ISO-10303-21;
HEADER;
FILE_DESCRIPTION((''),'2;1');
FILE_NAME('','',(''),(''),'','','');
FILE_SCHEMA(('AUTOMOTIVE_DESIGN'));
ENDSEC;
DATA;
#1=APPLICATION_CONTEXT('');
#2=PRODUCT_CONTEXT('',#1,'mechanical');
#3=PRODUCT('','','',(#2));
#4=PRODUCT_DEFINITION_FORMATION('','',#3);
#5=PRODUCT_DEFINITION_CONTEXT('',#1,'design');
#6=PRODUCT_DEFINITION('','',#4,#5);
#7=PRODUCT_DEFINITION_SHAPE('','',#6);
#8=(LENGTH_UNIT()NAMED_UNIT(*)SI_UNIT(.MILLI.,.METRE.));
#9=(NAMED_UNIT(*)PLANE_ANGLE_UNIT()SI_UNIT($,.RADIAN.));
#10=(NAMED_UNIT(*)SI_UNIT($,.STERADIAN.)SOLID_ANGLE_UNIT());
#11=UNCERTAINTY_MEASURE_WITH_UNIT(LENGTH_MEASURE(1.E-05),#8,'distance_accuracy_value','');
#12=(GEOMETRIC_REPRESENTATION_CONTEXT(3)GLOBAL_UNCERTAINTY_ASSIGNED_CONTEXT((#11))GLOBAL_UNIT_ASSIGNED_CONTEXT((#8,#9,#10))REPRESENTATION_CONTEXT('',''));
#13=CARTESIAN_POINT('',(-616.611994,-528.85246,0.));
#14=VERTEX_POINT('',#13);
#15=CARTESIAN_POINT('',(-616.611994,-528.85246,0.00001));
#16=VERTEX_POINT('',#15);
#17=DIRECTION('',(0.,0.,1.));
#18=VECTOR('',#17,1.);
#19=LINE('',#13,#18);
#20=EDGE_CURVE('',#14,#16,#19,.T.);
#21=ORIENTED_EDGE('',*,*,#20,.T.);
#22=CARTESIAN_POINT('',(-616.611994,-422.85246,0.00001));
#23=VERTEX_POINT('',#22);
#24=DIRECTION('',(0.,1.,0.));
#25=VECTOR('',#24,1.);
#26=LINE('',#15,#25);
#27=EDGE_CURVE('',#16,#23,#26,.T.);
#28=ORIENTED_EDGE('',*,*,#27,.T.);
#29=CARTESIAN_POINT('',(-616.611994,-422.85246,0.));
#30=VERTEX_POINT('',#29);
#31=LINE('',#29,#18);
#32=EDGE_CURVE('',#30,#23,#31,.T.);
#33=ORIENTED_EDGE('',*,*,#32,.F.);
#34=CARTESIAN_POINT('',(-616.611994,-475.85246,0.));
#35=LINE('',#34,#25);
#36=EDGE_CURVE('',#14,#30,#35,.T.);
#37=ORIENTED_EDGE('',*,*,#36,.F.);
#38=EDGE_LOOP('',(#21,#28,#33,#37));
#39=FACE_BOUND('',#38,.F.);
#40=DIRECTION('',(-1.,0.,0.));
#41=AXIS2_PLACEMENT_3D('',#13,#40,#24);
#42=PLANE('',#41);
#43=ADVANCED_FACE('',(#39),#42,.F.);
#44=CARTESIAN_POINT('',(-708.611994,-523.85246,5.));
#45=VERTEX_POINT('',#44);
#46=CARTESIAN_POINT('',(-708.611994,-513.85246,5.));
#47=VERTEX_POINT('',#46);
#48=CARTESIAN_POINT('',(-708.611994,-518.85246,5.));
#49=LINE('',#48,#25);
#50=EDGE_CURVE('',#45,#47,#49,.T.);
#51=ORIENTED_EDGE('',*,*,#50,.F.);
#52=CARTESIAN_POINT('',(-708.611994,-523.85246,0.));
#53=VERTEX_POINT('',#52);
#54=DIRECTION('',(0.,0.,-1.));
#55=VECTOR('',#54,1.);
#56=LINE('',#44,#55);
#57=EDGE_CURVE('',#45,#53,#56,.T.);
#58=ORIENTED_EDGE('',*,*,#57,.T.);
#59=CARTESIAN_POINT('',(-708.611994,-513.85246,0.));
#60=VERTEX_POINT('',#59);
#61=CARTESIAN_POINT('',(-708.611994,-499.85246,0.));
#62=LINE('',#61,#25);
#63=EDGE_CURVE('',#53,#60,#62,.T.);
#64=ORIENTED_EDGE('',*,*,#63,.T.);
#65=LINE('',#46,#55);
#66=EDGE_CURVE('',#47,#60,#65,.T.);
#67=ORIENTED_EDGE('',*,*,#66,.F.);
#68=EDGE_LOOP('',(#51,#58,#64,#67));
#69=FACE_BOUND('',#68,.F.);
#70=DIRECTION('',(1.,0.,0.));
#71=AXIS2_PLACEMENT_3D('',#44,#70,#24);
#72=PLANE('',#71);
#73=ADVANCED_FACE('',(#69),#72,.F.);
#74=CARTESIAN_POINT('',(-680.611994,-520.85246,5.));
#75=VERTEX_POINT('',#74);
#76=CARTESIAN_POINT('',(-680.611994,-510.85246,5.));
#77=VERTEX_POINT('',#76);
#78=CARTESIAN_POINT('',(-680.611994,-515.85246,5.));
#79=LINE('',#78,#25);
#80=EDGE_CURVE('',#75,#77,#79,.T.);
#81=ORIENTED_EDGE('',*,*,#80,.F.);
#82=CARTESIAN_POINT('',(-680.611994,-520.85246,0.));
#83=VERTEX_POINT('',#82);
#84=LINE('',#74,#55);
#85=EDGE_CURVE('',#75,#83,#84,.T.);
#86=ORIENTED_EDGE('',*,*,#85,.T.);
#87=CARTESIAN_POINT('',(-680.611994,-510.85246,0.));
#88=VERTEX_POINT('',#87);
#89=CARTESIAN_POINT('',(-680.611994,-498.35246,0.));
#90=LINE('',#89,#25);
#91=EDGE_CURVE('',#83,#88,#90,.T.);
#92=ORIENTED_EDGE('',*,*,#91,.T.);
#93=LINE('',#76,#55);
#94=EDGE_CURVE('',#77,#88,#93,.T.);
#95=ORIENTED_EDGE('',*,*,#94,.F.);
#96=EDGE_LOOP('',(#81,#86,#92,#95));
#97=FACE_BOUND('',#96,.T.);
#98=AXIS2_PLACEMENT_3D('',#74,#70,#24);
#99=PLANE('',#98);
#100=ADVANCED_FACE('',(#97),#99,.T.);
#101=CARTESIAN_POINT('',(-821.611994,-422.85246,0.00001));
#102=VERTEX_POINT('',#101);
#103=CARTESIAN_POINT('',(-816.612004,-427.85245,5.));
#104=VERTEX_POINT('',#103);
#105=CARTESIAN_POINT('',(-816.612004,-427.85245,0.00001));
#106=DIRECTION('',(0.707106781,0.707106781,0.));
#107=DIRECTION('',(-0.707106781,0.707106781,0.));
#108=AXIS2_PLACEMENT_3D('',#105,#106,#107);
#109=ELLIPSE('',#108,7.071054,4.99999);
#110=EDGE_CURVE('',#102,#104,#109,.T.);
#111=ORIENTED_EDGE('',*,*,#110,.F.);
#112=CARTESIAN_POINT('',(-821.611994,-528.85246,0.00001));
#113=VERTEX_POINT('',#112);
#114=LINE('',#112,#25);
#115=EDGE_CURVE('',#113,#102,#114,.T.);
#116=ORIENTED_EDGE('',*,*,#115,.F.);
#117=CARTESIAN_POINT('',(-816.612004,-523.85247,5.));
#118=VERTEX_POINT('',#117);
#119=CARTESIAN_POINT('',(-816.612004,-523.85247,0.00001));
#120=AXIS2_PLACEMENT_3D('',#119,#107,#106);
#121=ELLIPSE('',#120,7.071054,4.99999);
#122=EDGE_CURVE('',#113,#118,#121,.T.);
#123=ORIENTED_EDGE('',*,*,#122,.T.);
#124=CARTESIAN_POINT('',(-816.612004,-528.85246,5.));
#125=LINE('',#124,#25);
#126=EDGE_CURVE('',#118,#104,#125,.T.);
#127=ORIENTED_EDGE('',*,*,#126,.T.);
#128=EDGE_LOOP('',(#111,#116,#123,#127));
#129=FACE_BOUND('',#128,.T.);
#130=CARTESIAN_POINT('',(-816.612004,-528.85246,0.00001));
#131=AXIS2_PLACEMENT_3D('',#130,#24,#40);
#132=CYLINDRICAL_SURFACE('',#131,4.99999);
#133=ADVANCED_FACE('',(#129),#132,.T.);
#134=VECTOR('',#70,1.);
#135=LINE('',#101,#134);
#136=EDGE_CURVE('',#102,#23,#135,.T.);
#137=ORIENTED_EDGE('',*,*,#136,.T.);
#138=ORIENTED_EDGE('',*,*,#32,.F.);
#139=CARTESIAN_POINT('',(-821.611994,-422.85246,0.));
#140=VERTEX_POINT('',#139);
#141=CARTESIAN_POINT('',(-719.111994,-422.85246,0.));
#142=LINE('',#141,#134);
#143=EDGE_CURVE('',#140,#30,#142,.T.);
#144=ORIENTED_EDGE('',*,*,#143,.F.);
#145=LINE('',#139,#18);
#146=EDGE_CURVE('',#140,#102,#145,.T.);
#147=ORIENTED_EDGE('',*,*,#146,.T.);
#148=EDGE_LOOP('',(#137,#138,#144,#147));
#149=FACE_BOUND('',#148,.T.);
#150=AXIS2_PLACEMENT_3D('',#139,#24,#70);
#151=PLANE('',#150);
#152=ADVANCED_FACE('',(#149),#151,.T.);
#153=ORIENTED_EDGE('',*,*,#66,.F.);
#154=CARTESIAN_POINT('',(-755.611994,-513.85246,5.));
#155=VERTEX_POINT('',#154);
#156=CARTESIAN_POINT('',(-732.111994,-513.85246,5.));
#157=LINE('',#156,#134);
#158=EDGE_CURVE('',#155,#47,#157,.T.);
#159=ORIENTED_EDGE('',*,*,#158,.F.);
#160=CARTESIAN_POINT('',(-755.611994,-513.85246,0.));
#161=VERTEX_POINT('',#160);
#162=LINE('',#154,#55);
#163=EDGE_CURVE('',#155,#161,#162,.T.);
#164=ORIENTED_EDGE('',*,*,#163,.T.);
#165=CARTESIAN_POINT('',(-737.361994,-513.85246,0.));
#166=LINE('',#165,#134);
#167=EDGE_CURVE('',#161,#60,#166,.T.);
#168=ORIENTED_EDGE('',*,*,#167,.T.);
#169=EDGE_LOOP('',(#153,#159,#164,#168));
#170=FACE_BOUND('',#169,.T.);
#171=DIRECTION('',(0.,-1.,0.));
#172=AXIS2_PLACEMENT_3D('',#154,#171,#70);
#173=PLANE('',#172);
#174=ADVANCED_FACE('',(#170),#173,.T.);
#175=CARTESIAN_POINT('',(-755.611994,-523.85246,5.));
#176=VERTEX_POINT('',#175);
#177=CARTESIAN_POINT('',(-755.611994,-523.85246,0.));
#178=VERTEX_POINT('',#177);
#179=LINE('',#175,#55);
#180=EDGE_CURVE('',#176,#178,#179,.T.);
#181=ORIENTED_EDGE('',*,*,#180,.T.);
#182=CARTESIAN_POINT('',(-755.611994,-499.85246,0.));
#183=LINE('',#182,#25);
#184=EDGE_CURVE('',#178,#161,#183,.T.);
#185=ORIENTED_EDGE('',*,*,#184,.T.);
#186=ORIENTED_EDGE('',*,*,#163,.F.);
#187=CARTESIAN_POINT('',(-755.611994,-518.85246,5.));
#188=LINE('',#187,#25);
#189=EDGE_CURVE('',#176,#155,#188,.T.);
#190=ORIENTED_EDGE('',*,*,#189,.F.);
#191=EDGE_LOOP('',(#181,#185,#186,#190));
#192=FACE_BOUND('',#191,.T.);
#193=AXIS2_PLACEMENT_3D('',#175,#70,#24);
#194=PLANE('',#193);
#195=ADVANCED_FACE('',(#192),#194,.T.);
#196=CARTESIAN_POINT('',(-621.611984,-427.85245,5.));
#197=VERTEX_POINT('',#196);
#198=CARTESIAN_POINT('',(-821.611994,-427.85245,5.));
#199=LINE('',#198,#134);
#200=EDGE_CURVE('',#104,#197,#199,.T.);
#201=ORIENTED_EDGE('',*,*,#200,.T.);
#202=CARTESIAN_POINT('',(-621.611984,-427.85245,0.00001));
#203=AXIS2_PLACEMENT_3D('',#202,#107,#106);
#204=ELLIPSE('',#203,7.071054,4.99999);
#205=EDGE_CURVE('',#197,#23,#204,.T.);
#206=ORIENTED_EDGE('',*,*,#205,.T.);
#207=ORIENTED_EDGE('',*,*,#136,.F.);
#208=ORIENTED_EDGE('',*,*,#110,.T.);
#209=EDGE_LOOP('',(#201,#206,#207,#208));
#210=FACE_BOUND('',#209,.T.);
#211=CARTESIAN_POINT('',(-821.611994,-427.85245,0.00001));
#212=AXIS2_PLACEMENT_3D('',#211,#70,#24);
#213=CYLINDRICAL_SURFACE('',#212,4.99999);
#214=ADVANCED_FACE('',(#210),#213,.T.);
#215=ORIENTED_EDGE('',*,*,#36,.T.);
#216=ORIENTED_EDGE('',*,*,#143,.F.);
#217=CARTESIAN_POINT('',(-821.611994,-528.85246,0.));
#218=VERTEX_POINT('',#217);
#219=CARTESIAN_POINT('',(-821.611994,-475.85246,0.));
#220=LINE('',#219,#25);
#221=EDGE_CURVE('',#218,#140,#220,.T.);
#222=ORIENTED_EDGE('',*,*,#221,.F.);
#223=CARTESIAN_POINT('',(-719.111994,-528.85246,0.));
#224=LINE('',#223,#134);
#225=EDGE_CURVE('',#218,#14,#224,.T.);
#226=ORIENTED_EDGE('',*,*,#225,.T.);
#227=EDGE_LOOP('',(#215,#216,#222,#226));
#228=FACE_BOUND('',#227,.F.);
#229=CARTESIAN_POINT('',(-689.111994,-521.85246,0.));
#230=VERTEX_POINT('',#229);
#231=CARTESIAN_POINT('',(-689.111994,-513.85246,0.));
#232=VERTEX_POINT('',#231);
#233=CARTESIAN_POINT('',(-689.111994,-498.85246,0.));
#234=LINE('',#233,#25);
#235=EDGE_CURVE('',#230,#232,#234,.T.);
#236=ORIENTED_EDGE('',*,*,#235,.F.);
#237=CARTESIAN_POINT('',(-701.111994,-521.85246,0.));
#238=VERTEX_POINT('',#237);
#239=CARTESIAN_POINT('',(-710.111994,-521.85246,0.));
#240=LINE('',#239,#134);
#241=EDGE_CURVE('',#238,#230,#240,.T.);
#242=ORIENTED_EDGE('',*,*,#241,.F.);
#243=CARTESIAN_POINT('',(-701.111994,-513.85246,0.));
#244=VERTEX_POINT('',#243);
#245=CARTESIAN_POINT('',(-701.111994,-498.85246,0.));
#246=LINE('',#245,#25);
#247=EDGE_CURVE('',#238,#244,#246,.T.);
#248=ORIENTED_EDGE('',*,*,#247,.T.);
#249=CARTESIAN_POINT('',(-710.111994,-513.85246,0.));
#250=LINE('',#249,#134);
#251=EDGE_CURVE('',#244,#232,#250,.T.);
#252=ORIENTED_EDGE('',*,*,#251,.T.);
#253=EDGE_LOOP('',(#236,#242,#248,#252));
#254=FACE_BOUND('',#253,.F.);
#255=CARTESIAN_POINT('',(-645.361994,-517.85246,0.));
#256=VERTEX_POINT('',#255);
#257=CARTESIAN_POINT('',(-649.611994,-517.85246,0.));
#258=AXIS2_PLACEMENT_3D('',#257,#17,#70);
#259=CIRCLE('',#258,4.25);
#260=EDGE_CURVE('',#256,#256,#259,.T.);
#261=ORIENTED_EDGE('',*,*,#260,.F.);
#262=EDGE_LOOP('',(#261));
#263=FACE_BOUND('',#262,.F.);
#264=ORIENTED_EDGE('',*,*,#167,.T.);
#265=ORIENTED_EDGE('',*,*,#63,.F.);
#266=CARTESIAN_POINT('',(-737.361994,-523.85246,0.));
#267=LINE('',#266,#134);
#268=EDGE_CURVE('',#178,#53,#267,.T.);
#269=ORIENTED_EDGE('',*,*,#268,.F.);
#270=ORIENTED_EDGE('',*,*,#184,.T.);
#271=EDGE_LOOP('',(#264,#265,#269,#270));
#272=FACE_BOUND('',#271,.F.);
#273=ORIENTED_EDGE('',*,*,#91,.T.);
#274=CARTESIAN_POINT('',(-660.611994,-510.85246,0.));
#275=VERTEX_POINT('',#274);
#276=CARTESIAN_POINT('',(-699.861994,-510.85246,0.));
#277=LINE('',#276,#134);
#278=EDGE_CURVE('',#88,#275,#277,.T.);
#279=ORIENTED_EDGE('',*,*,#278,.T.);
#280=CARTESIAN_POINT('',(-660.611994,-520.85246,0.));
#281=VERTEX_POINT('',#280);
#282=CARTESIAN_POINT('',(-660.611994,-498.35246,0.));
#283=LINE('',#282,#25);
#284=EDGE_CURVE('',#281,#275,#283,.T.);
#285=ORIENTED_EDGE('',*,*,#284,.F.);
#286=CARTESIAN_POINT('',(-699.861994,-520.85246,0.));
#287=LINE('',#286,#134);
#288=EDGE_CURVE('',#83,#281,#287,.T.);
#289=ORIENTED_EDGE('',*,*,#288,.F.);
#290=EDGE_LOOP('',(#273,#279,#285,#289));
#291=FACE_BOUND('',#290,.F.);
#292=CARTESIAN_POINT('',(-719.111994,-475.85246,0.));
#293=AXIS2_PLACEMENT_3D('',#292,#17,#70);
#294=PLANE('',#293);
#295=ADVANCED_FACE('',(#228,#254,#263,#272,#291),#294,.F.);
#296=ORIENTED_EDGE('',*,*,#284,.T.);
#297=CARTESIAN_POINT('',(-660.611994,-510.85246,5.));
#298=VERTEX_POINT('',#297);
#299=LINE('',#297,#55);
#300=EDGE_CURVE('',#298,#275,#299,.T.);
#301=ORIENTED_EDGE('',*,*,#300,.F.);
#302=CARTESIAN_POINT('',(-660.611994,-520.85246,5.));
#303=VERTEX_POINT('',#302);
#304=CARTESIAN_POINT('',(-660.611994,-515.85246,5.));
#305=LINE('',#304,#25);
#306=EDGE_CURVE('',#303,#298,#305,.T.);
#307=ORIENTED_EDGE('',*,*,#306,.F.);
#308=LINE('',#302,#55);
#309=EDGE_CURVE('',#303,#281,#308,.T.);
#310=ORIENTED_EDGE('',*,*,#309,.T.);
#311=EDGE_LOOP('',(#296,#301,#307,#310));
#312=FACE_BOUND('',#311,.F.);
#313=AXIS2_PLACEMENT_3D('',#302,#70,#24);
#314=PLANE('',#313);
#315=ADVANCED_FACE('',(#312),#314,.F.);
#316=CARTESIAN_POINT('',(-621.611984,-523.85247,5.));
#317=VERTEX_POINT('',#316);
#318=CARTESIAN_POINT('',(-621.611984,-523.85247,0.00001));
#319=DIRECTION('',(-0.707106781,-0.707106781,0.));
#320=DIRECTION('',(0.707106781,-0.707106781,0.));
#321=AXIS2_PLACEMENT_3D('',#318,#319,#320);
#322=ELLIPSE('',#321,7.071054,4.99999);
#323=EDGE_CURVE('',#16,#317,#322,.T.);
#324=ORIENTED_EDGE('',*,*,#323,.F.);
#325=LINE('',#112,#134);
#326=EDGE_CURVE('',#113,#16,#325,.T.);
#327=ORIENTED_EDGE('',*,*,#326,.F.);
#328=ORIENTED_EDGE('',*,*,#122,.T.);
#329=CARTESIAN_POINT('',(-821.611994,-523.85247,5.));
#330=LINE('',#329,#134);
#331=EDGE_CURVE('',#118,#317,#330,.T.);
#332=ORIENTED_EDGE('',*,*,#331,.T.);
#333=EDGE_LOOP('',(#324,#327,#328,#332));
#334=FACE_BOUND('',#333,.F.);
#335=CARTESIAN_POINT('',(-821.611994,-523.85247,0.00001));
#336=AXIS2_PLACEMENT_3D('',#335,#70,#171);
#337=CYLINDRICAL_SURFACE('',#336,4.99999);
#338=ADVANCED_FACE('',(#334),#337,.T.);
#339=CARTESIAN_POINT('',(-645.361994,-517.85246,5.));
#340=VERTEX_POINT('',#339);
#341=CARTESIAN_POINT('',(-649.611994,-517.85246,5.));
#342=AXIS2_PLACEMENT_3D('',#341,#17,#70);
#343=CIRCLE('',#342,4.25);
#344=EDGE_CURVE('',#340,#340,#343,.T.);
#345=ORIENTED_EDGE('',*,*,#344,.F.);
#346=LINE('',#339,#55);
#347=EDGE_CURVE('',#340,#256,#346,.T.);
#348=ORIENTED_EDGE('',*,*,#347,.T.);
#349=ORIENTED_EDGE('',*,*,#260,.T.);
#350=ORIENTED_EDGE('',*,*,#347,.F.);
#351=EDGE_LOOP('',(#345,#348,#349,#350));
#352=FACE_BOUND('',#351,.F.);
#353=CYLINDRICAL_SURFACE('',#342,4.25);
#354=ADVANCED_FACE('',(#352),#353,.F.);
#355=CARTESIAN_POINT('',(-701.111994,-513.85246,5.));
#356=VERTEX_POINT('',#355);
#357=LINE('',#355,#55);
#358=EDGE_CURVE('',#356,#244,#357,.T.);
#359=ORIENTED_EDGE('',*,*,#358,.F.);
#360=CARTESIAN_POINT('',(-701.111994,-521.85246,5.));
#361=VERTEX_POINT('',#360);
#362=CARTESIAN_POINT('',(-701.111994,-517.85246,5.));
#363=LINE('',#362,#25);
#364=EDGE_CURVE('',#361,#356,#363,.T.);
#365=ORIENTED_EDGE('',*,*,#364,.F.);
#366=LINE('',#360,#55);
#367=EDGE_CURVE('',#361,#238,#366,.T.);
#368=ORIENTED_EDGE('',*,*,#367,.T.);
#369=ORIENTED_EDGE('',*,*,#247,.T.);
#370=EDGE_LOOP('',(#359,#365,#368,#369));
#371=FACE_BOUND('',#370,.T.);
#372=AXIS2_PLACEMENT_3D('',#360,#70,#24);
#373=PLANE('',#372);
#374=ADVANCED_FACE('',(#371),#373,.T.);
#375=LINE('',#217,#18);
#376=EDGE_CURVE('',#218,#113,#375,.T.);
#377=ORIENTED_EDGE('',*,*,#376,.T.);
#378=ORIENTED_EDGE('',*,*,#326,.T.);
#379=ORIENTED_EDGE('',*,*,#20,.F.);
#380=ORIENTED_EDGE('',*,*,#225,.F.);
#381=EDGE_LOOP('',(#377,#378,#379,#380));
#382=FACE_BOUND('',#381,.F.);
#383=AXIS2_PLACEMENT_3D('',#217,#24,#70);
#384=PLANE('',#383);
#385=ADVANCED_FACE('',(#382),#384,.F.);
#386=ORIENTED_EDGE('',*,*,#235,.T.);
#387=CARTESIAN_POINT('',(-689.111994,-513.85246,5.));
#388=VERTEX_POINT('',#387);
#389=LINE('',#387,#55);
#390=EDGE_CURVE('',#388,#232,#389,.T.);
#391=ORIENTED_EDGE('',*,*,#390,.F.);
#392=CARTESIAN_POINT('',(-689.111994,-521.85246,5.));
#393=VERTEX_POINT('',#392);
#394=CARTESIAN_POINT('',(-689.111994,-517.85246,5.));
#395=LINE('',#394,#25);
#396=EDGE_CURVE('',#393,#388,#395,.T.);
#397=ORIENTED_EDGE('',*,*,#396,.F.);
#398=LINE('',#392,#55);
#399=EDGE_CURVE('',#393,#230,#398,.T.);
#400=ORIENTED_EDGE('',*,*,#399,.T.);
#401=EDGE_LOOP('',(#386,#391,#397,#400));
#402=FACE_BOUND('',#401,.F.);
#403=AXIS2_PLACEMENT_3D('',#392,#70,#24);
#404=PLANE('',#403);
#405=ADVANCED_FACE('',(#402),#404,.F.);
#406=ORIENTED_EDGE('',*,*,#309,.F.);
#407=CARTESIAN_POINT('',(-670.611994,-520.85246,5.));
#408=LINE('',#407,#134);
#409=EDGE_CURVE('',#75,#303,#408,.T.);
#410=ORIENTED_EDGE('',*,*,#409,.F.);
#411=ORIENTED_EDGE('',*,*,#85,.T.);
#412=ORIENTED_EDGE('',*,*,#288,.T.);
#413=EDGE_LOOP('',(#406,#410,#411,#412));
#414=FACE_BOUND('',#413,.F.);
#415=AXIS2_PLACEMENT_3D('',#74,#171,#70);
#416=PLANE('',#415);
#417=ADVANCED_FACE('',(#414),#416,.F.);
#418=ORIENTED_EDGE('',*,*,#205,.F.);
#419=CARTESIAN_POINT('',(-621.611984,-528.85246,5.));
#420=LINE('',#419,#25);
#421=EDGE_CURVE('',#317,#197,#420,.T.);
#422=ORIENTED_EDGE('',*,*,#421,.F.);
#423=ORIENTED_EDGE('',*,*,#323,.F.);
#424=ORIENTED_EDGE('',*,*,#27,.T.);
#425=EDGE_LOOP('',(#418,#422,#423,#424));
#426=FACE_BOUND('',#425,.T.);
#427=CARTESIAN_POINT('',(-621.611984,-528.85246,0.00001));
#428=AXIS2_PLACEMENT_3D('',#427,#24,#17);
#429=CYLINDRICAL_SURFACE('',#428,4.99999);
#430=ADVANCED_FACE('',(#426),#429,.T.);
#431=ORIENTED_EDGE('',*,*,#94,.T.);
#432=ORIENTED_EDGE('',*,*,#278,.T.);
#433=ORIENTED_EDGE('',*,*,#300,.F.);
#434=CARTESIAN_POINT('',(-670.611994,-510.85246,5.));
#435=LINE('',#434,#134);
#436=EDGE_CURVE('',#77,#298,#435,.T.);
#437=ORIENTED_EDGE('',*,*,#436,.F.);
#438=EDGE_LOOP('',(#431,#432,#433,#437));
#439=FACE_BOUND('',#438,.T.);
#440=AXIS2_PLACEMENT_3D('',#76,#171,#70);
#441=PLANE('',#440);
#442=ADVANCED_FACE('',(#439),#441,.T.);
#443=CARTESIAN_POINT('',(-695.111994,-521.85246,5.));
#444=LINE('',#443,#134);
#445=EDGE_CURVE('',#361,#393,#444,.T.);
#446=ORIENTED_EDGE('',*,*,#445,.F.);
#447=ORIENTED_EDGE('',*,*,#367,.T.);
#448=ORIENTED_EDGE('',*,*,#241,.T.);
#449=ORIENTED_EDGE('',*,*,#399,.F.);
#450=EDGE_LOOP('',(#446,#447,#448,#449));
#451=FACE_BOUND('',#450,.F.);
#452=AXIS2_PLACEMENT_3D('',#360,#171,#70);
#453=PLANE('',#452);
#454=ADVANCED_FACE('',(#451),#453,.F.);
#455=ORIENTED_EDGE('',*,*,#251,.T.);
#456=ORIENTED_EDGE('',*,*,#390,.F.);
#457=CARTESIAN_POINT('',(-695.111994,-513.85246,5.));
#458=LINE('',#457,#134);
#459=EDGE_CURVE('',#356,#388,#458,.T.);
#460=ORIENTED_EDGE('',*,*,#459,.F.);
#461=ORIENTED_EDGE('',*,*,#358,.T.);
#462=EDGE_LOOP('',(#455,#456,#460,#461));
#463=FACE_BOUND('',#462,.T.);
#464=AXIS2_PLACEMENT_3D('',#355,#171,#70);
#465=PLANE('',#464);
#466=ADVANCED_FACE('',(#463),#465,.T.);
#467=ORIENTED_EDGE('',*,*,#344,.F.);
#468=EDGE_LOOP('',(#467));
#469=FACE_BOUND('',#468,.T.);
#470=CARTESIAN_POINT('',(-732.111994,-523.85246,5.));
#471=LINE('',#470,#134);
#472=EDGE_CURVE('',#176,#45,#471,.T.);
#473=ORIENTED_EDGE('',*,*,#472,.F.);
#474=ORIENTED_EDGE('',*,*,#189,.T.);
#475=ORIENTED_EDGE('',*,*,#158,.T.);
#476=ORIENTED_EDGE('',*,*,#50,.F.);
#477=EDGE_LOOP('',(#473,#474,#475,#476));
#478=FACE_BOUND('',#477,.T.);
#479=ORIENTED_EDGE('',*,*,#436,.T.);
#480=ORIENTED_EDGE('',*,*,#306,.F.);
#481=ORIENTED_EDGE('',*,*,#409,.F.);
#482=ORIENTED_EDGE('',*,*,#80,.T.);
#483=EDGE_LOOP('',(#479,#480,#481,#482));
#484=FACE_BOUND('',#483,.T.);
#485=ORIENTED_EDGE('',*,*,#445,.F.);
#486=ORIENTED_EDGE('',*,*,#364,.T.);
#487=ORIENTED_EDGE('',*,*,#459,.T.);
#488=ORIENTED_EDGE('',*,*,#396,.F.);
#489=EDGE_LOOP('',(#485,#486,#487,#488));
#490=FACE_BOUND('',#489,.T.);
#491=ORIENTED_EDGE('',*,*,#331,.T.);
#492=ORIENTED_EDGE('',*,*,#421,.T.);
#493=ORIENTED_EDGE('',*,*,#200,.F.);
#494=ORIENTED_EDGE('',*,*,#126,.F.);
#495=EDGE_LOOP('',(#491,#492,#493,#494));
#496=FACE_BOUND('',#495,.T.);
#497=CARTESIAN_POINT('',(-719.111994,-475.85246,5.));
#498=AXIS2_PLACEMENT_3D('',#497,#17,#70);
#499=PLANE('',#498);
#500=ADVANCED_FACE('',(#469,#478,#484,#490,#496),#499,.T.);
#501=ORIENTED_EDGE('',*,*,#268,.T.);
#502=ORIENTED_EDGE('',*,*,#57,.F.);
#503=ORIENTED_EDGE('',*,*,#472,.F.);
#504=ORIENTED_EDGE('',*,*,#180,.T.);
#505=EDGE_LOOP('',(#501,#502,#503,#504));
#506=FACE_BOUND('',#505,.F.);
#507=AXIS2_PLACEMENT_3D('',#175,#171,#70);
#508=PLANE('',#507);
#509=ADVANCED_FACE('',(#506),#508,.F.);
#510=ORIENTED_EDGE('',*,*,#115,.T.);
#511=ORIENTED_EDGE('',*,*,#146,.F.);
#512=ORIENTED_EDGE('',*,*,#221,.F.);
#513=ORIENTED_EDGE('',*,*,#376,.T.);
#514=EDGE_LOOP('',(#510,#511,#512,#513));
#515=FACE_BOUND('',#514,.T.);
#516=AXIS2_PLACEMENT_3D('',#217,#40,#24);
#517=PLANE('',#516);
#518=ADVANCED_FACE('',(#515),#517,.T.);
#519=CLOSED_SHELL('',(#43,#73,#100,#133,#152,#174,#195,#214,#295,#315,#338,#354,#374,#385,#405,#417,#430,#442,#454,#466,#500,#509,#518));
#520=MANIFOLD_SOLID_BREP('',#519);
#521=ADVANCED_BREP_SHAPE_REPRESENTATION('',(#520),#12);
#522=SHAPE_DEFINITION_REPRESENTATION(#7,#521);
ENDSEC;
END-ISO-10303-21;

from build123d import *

# Parameters (mm, degrees)
F0_W      = 205
F0_H      = 106
F1_DEPTH  = 5
F2_R      = 4.25
F3_DEPTH  = 500
F4_W      = 20
F4_H      = 10
F5_DEPTH  = 500
F6_W      = 12
F6_H      = 8
F7_DEPTH  = 500
F8_R      = 4.99999
F9_W      = 47
F9_H      = 10
F10_DEPTH = 500


# Not quite as in the source:
# - a fillet or chamfer is up to 0.001 mm smaller than in the source, because OpenCascade refuses the exact size


with BuildPart() as f1:
    # F0 (on Top) → F1 (new body)
    with BuildSketch(Plane.XY):
        with Locations((-719.1119938903, -475.8524597138)):
            Rectangle(F0_W, F0_H)
    extrude(amount=F1_DEPTH)

    # F2 (on face) → F3 (cut)
    with BuildSketch(Plane.XY.offset(5)):
        with Locations((-649.6119938903, -517.8524597138)):
            Circle(F2_R)
    extrude(amount=-F3_DEPTH, mode=Mode.SUBTRACT)

    # F4 (on face) → F5 (cut)
    with BuildSketch(Plane.XY.offset(5)):
        with Locations((-670.6119938903, -515.8524597138)):
            Rectangle(F4_W, F4_H)
    extrude(amount=-F5_DEPTH, mode=Mode.SUBTRACT)

    # F6 (on face) → F7 (cut)
    with BuildSketch(Plane.XY.offset(5)):
        with Locations((-695.1119938903, -517.8524597138)):
            Rectangle(F6_W, F6_H)
    extrude(amount=-F7_DEPTH, mode=Mode.SUBTRACT)

    # F8 (radius 5 in the source; OpenCascade refuses exactly that, so slightly less here)
    f8_edges = [f1.edges().sort_by_distance(p)[0] for p in [
        (-821.611994, -475.85246, 5),
        (-719.111994, -528.85246, 5),
        (-616.611994, -475.85246, 5),
        (-719.111994, -422.85246, 5),
    ]]
    fillet(f8_edges, radius=F8_R)

    # F9 (on face) → F10 (cut)
    with BuildSketch(Plane.XY.offset(5)):
        with Locations((-732.1119938903, -518.8524597138)):
            Rectangle(F9_W, F9_H)
    extrude(amount=-F10_DEPTH, mode=Mode.SUBTRACT)


solid = f1.part
